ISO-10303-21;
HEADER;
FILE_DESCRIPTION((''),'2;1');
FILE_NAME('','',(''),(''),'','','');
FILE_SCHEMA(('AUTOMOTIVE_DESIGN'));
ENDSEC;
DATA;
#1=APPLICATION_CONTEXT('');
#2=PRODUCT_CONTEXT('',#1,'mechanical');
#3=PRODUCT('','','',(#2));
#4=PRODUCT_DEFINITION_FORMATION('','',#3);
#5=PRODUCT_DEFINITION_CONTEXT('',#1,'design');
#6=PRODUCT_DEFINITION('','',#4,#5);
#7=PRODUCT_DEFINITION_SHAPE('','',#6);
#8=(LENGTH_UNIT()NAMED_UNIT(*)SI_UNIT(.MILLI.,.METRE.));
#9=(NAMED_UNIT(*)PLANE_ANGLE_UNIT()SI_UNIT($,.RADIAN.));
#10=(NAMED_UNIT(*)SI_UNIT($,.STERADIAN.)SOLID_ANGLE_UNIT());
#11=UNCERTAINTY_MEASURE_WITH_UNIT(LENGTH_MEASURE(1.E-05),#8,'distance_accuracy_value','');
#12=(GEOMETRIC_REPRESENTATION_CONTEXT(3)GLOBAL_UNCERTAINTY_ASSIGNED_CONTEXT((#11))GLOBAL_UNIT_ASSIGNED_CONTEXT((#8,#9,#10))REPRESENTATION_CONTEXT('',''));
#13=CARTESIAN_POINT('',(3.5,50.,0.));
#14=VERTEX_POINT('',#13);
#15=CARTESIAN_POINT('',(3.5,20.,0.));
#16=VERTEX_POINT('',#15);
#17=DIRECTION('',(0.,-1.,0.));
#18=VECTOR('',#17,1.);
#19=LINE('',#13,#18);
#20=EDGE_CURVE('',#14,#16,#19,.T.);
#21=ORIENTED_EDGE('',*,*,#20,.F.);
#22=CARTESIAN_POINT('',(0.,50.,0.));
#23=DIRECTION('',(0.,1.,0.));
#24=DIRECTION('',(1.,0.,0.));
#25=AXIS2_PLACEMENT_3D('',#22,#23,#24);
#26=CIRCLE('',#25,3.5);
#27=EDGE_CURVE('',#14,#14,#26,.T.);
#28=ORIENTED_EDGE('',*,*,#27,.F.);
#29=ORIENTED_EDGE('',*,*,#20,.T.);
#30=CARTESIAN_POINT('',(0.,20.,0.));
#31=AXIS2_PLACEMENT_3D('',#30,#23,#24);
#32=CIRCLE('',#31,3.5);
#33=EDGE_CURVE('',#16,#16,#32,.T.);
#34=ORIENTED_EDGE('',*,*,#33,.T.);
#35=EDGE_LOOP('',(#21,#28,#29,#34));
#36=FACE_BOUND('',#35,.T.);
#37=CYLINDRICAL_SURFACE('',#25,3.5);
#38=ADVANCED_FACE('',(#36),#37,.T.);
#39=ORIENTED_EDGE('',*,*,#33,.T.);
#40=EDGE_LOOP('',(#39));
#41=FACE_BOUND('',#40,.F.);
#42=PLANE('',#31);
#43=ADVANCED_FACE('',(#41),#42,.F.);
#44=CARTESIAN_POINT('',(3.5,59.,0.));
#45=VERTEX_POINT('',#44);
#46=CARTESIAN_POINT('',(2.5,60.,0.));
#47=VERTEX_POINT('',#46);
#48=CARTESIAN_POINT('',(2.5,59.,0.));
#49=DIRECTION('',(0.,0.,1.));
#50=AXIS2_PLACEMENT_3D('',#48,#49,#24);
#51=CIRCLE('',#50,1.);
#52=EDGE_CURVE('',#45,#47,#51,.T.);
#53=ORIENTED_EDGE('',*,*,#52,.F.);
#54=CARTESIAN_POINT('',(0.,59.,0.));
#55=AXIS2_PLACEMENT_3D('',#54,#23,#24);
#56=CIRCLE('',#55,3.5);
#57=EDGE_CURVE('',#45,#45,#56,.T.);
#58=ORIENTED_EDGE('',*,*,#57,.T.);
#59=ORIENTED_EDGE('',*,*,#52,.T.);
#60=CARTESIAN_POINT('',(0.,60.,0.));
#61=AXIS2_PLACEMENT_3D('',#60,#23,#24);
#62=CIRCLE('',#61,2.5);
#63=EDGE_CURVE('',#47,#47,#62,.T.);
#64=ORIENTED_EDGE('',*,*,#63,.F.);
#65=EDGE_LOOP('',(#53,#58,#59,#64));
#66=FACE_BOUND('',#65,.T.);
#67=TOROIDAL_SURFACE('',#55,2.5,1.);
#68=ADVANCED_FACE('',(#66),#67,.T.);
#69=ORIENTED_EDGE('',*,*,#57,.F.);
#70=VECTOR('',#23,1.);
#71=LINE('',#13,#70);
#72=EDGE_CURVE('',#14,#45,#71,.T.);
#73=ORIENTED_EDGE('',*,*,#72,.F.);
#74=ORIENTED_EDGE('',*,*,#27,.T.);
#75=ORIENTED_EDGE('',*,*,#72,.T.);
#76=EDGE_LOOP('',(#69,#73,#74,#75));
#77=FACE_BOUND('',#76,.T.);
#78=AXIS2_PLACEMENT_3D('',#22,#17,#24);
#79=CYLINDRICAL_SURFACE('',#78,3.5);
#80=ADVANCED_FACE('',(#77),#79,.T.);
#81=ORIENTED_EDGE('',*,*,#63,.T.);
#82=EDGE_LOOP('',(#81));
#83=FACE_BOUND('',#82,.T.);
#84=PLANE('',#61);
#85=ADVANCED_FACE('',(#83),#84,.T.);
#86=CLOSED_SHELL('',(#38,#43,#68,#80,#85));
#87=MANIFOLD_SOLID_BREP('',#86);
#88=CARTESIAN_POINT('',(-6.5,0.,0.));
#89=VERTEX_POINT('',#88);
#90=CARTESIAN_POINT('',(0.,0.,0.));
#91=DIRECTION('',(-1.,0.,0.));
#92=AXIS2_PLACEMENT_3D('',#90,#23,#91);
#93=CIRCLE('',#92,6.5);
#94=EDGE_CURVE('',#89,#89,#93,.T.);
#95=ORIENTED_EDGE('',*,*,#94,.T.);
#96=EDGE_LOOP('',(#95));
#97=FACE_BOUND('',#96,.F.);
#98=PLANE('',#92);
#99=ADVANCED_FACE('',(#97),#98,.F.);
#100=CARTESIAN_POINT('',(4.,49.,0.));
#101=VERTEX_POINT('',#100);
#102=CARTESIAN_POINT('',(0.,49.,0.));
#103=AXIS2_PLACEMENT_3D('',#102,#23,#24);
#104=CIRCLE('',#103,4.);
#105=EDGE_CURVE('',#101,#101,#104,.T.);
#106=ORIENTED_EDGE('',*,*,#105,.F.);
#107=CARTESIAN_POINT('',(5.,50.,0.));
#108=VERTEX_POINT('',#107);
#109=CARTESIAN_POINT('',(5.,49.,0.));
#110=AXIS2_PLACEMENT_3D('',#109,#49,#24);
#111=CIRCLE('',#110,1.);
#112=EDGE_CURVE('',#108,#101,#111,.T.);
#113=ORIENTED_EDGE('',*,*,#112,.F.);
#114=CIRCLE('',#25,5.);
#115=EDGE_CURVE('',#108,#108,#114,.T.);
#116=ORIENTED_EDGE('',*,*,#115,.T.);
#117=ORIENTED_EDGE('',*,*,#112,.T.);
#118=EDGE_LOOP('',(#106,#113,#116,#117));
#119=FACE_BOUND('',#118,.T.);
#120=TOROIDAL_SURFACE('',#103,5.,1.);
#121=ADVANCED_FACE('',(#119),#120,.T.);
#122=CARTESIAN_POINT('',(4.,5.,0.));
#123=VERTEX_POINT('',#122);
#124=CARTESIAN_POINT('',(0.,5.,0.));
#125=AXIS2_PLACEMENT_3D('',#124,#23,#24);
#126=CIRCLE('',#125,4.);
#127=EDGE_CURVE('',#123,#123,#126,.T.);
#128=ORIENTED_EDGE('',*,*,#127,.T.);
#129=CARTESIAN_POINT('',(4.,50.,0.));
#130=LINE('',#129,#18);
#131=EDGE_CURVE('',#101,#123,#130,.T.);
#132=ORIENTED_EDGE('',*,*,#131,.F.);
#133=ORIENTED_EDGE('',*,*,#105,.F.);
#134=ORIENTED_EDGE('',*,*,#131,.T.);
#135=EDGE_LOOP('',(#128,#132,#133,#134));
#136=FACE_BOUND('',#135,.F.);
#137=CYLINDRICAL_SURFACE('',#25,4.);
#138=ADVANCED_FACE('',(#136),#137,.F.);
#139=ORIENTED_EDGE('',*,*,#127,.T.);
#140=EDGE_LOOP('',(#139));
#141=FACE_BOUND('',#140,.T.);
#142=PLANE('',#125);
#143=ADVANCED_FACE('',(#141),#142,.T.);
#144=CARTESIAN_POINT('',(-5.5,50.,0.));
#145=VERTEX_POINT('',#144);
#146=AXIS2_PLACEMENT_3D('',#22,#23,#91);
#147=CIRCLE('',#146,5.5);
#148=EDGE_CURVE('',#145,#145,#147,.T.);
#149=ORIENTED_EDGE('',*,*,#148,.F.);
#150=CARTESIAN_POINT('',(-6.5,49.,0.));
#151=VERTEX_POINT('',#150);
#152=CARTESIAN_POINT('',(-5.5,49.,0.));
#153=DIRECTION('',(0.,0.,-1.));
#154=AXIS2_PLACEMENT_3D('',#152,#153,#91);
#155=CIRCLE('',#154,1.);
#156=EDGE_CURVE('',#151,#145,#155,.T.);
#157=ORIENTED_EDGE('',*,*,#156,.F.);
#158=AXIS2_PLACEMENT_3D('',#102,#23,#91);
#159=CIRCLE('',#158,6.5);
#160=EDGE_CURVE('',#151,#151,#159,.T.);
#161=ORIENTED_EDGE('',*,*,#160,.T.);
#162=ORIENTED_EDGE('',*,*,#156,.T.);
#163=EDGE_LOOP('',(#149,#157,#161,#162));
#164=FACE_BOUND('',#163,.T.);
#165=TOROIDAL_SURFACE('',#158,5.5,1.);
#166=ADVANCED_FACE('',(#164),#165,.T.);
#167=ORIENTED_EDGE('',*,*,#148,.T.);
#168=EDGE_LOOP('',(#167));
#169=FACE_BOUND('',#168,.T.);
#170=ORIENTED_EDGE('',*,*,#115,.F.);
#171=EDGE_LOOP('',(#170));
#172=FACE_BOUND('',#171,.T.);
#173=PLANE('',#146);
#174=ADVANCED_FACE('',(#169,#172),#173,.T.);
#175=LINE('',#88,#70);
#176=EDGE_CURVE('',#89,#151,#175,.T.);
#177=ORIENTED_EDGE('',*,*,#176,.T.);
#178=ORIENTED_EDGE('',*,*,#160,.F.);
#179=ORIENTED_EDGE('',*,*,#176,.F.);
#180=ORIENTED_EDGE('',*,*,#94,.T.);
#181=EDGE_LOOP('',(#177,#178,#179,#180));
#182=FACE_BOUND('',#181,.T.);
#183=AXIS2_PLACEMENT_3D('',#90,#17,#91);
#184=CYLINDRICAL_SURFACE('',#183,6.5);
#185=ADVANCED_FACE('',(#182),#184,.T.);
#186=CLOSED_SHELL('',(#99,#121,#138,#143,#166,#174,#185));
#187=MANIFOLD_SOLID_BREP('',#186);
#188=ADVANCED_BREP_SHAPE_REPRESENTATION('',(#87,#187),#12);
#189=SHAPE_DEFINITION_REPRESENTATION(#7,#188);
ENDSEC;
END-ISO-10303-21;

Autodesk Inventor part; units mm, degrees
ref_plane "YZ Plane" through (0, 0, 0) normal (1, 0, 0) x (0, 1, 0)
ref_plane "XZ Plane" through (0, 0, 0) normal (0, 1, 0) x (-1, 0, 0)
ref_plane "XY Plane" through (0, 0, 0) normal (0, 0, 1) x (1, 0, 0)
sketch "스케치1" plane through (0, 0, 0) normal (0, 1, 0) x (-1, 0, 0)
  circle A0 centre (0, 0) radius 6.5
  dimension "d0" = 13
extrude "돌출1" add sketch "스케치1" along normal blind 50
sketch "스케치2" plane through (0, 50, 0) normal (0, 1, 0) x (1, 0, 0)
  circle A0 centre (0, 0) radius 4
  dimension "d3" = 8
extrude "돌출2" cut sketch "스케치2" against normal blind 45
sketch "스케치4" plane through (0, 50, 0) normal (0, 1, 0) x (1, 0, 0)
  circle A0 centre (0, 0) radius 3.5
  dimension "d6" = 7
extrude "돌출3" add sketch "스케치4" along normal blind 10 and the other way blind 30
fillet "모깎기1" radius 1 3 edges at (-4, 50, 0) (6.5, 50, 0) (-3.5, 60, 0)
sketch "스케치5" plane through (0, 60, 0) normal (0, 1, 0) x (1, 0, 0)
  point P0 (0, 0)
properties part number "fan_num2"
